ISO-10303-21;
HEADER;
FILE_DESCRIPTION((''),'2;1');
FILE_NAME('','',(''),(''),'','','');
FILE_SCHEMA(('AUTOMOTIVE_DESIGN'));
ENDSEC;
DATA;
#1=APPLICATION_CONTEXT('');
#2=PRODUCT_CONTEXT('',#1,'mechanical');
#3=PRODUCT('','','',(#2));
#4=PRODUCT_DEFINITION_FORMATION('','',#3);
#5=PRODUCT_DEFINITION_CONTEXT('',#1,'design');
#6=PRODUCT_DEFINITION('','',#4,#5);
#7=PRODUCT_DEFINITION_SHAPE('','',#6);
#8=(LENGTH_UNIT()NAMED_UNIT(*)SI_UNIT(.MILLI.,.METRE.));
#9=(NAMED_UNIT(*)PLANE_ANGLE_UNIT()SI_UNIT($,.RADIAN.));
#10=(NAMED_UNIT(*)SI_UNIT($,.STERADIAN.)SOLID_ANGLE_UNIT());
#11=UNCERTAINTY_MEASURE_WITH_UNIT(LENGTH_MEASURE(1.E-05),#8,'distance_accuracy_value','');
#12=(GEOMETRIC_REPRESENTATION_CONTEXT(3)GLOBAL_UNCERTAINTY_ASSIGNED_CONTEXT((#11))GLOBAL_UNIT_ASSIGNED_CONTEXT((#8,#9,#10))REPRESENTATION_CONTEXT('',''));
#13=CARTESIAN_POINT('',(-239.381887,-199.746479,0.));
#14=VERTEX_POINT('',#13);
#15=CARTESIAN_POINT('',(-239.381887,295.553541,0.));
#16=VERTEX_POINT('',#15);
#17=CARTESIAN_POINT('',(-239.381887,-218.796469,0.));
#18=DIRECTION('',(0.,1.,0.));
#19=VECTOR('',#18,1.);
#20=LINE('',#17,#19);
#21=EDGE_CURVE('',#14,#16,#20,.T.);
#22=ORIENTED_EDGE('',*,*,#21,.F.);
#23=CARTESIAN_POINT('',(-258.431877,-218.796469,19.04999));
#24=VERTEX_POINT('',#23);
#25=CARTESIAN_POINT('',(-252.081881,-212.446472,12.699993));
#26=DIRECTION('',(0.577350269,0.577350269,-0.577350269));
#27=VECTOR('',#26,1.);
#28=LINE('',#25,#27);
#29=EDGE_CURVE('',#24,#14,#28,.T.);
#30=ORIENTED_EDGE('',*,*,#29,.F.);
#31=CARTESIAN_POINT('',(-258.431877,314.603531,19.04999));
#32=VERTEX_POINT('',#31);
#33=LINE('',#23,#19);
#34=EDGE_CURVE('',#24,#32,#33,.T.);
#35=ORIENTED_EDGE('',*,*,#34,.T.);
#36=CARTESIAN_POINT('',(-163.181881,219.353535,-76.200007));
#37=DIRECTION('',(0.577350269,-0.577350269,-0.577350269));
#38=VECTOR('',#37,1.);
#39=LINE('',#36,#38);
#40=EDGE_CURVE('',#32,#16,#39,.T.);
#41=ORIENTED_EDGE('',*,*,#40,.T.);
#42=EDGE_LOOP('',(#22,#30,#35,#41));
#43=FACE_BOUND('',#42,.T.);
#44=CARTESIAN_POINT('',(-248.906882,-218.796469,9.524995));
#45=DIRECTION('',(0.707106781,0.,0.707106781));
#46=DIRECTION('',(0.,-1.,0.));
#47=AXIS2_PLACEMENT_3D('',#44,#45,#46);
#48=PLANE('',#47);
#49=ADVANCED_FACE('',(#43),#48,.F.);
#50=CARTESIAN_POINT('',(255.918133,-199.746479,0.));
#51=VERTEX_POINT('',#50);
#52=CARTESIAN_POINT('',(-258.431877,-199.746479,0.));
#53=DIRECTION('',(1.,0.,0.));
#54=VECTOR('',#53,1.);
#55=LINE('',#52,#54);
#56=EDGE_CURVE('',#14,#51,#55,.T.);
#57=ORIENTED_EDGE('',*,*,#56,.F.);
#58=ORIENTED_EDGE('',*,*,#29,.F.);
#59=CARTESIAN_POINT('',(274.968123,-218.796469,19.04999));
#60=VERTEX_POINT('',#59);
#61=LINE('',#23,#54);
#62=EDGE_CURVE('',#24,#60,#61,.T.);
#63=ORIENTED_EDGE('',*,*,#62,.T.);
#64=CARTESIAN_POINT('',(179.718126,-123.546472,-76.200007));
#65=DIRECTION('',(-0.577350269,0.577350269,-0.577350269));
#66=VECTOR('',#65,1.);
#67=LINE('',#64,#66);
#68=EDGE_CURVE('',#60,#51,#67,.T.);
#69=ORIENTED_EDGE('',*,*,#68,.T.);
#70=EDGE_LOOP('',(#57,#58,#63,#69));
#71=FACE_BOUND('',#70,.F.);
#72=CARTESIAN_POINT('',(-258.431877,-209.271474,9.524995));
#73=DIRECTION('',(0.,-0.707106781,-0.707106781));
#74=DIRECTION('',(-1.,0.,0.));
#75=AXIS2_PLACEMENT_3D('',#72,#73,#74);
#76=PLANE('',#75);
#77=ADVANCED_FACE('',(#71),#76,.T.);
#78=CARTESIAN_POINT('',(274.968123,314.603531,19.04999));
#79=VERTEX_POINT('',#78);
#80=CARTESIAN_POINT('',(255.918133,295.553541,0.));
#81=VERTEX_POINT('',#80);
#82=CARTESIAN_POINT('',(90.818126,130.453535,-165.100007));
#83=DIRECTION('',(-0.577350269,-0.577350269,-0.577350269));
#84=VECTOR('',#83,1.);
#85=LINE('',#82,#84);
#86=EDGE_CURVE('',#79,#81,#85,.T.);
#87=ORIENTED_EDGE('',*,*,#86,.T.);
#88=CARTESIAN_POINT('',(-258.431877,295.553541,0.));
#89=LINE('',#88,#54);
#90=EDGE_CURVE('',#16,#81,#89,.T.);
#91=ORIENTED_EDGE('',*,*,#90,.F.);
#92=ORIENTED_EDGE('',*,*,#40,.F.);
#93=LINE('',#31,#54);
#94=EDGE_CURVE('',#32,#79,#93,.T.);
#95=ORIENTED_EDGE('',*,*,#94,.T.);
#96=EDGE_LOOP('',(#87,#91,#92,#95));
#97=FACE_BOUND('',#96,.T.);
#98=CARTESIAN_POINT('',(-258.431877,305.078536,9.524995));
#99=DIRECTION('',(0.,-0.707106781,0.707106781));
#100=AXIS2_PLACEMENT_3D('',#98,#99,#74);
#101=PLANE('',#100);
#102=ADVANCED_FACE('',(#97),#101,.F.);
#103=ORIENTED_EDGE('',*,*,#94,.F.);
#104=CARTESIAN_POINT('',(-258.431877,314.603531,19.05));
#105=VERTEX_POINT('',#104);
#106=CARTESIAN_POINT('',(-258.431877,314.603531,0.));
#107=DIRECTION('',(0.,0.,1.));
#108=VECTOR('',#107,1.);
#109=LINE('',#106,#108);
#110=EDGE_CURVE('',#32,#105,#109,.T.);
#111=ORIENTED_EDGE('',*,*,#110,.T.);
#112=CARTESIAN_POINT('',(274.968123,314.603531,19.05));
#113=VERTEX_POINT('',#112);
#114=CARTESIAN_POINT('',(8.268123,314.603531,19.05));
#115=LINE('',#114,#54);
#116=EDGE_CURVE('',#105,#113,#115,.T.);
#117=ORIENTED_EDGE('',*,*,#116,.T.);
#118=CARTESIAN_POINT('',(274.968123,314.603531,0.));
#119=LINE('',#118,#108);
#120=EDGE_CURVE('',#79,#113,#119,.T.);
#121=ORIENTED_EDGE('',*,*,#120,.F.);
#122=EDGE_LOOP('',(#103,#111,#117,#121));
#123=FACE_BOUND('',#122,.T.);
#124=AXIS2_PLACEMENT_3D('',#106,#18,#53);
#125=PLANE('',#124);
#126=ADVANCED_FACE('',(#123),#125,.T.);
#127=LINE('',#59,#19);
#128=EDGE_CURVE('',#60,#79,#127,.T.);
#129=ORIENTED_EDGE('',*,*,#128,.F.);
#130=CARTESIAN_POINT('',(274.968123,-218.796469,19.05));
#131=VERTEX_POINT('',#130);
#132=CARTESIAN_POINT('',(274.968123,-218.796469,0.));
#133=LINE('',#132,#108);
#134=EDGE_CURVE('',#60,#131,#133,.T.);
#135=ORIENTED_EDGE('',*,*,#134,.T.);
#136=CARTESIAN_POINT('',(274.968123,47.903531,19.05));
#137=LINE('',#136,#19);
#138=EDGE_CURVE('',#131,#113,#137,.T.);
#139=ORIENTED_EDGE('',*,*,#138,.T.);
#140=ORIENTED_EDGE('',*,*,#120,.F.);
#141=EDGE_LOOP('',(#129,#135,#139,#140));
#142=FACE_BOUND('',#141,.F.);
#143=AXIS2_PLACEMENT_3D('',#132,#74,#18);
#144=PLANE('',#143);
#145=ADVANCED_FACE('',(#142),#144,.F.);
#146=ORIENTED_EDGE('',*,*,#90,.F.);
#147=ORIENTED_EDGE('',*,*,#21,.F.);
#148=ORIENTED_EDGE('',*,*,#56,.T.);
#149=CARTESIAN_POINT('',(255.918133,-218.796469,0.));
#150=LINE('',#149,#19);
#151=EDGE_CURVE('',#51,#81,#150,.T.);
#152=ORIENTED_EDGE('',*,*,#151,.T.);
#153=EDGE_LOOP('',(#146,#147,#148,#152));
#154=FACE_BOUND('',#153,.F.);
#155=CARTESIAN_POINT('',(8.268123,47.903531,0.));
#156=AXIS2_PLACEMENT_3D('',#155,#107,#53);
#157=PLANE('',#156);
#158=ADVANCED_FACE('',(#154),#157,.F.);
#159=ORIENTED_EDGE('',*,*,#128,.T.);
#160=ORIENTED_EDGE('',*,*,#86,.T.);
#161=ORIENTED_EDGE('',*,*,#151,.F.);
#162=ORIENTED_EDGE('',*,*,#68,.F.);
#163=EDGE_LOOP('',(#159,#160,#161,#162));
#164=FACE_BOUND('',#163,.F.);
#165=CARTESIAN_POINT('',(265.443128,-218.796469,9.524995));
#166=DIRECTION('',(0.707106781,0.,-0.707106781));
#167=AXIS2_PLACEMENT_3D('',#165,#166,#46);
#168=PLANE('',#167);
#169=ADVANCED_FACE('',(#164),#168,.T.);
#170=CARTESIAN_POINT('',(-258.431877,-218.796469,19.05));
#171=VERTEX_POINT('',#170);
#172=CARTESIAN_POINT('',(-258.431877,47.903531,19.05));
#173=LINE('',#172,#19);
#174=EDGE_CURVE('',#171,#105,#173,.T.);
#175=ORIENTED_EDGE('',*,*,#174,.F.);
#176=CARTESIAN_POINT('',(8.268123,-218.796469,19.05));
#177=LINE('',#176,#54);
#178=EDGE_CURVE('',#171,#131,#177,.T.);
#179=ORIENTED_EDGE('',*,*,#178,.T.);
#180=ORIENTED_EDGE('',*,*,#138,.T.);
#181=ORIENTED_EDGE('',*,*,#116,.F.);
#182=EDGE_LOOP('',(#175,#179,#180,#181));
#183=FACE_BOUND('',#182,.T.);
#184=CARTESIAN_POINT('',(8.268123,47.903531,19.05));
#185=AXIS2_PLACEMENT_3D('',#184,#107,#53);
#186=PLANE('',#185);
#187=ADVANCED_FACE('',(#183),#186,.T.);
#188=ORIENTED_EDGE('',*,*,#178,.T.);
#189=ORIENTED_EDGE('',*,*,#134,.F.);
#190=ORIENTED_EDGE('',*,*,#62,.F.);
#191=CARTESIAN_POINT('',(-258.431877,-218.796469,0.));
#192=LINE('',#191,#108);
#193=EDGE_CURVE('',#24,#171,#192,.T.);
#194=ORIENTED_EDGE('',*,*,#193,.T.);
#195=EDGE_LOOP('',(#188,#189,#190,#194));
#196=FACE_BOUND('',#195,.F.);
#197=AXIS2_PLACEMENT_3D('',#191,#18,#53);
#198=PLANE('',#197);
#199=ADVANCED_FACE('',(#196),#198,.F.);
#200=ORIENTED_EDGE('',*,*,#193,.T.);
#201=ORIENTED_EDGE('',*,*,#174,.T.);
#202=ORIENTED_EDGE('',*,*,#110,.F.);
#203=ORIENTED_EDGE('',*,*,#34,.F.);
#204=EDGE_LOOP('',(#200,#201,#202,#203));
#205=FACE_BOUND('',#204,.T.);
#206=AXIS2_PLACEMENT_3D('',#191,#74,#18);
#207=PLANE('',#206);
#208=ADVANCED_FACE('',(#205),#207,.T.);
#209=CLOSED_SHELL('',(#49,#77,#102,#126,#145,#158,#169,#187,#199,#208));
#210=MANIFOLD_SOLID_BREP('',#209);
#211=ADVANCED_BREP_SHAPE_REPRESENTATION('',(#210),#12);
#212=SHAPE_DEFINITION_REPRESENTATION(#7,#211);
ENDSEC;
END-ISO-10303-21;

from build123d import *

# Parameters (mm, degrees)
F0_W     = 533.4
F0_H     = 533.4
F1_DEPTH = 19.05
F2_SIZE  = 19.04999


# Not quite as in the source:
# - a fillet or chamfer is up to 0.001 mm smaller than in the source, because OpenCascade refuses the exact size


with BuildPart() as f1:
    # F0 (on Top) → F1 (new body)
    with BuildSketch(Plane.XY):
        with Locations((8.2681225613, 47.9035311963)):
            Rectangle(F0_W, F0_H)
    extrude(amount=F1_DEPTH)

    # F2 (size 19.05 in the source; OpenCascade refuses exactly that, so slightly less here)
    f2_edges = [f1.edges().sort_by_distance(p)[0] for p in [
        (-258.431877, 47.903531, 0),
        (8.268123, -218.796469, 0),
        (274.968123, 47.903531, 0),
        (8.268123, 314.603531, 0),
    ]]
    chamfer(f2_edges, length=F2_SIZE)


solid = f1.part
